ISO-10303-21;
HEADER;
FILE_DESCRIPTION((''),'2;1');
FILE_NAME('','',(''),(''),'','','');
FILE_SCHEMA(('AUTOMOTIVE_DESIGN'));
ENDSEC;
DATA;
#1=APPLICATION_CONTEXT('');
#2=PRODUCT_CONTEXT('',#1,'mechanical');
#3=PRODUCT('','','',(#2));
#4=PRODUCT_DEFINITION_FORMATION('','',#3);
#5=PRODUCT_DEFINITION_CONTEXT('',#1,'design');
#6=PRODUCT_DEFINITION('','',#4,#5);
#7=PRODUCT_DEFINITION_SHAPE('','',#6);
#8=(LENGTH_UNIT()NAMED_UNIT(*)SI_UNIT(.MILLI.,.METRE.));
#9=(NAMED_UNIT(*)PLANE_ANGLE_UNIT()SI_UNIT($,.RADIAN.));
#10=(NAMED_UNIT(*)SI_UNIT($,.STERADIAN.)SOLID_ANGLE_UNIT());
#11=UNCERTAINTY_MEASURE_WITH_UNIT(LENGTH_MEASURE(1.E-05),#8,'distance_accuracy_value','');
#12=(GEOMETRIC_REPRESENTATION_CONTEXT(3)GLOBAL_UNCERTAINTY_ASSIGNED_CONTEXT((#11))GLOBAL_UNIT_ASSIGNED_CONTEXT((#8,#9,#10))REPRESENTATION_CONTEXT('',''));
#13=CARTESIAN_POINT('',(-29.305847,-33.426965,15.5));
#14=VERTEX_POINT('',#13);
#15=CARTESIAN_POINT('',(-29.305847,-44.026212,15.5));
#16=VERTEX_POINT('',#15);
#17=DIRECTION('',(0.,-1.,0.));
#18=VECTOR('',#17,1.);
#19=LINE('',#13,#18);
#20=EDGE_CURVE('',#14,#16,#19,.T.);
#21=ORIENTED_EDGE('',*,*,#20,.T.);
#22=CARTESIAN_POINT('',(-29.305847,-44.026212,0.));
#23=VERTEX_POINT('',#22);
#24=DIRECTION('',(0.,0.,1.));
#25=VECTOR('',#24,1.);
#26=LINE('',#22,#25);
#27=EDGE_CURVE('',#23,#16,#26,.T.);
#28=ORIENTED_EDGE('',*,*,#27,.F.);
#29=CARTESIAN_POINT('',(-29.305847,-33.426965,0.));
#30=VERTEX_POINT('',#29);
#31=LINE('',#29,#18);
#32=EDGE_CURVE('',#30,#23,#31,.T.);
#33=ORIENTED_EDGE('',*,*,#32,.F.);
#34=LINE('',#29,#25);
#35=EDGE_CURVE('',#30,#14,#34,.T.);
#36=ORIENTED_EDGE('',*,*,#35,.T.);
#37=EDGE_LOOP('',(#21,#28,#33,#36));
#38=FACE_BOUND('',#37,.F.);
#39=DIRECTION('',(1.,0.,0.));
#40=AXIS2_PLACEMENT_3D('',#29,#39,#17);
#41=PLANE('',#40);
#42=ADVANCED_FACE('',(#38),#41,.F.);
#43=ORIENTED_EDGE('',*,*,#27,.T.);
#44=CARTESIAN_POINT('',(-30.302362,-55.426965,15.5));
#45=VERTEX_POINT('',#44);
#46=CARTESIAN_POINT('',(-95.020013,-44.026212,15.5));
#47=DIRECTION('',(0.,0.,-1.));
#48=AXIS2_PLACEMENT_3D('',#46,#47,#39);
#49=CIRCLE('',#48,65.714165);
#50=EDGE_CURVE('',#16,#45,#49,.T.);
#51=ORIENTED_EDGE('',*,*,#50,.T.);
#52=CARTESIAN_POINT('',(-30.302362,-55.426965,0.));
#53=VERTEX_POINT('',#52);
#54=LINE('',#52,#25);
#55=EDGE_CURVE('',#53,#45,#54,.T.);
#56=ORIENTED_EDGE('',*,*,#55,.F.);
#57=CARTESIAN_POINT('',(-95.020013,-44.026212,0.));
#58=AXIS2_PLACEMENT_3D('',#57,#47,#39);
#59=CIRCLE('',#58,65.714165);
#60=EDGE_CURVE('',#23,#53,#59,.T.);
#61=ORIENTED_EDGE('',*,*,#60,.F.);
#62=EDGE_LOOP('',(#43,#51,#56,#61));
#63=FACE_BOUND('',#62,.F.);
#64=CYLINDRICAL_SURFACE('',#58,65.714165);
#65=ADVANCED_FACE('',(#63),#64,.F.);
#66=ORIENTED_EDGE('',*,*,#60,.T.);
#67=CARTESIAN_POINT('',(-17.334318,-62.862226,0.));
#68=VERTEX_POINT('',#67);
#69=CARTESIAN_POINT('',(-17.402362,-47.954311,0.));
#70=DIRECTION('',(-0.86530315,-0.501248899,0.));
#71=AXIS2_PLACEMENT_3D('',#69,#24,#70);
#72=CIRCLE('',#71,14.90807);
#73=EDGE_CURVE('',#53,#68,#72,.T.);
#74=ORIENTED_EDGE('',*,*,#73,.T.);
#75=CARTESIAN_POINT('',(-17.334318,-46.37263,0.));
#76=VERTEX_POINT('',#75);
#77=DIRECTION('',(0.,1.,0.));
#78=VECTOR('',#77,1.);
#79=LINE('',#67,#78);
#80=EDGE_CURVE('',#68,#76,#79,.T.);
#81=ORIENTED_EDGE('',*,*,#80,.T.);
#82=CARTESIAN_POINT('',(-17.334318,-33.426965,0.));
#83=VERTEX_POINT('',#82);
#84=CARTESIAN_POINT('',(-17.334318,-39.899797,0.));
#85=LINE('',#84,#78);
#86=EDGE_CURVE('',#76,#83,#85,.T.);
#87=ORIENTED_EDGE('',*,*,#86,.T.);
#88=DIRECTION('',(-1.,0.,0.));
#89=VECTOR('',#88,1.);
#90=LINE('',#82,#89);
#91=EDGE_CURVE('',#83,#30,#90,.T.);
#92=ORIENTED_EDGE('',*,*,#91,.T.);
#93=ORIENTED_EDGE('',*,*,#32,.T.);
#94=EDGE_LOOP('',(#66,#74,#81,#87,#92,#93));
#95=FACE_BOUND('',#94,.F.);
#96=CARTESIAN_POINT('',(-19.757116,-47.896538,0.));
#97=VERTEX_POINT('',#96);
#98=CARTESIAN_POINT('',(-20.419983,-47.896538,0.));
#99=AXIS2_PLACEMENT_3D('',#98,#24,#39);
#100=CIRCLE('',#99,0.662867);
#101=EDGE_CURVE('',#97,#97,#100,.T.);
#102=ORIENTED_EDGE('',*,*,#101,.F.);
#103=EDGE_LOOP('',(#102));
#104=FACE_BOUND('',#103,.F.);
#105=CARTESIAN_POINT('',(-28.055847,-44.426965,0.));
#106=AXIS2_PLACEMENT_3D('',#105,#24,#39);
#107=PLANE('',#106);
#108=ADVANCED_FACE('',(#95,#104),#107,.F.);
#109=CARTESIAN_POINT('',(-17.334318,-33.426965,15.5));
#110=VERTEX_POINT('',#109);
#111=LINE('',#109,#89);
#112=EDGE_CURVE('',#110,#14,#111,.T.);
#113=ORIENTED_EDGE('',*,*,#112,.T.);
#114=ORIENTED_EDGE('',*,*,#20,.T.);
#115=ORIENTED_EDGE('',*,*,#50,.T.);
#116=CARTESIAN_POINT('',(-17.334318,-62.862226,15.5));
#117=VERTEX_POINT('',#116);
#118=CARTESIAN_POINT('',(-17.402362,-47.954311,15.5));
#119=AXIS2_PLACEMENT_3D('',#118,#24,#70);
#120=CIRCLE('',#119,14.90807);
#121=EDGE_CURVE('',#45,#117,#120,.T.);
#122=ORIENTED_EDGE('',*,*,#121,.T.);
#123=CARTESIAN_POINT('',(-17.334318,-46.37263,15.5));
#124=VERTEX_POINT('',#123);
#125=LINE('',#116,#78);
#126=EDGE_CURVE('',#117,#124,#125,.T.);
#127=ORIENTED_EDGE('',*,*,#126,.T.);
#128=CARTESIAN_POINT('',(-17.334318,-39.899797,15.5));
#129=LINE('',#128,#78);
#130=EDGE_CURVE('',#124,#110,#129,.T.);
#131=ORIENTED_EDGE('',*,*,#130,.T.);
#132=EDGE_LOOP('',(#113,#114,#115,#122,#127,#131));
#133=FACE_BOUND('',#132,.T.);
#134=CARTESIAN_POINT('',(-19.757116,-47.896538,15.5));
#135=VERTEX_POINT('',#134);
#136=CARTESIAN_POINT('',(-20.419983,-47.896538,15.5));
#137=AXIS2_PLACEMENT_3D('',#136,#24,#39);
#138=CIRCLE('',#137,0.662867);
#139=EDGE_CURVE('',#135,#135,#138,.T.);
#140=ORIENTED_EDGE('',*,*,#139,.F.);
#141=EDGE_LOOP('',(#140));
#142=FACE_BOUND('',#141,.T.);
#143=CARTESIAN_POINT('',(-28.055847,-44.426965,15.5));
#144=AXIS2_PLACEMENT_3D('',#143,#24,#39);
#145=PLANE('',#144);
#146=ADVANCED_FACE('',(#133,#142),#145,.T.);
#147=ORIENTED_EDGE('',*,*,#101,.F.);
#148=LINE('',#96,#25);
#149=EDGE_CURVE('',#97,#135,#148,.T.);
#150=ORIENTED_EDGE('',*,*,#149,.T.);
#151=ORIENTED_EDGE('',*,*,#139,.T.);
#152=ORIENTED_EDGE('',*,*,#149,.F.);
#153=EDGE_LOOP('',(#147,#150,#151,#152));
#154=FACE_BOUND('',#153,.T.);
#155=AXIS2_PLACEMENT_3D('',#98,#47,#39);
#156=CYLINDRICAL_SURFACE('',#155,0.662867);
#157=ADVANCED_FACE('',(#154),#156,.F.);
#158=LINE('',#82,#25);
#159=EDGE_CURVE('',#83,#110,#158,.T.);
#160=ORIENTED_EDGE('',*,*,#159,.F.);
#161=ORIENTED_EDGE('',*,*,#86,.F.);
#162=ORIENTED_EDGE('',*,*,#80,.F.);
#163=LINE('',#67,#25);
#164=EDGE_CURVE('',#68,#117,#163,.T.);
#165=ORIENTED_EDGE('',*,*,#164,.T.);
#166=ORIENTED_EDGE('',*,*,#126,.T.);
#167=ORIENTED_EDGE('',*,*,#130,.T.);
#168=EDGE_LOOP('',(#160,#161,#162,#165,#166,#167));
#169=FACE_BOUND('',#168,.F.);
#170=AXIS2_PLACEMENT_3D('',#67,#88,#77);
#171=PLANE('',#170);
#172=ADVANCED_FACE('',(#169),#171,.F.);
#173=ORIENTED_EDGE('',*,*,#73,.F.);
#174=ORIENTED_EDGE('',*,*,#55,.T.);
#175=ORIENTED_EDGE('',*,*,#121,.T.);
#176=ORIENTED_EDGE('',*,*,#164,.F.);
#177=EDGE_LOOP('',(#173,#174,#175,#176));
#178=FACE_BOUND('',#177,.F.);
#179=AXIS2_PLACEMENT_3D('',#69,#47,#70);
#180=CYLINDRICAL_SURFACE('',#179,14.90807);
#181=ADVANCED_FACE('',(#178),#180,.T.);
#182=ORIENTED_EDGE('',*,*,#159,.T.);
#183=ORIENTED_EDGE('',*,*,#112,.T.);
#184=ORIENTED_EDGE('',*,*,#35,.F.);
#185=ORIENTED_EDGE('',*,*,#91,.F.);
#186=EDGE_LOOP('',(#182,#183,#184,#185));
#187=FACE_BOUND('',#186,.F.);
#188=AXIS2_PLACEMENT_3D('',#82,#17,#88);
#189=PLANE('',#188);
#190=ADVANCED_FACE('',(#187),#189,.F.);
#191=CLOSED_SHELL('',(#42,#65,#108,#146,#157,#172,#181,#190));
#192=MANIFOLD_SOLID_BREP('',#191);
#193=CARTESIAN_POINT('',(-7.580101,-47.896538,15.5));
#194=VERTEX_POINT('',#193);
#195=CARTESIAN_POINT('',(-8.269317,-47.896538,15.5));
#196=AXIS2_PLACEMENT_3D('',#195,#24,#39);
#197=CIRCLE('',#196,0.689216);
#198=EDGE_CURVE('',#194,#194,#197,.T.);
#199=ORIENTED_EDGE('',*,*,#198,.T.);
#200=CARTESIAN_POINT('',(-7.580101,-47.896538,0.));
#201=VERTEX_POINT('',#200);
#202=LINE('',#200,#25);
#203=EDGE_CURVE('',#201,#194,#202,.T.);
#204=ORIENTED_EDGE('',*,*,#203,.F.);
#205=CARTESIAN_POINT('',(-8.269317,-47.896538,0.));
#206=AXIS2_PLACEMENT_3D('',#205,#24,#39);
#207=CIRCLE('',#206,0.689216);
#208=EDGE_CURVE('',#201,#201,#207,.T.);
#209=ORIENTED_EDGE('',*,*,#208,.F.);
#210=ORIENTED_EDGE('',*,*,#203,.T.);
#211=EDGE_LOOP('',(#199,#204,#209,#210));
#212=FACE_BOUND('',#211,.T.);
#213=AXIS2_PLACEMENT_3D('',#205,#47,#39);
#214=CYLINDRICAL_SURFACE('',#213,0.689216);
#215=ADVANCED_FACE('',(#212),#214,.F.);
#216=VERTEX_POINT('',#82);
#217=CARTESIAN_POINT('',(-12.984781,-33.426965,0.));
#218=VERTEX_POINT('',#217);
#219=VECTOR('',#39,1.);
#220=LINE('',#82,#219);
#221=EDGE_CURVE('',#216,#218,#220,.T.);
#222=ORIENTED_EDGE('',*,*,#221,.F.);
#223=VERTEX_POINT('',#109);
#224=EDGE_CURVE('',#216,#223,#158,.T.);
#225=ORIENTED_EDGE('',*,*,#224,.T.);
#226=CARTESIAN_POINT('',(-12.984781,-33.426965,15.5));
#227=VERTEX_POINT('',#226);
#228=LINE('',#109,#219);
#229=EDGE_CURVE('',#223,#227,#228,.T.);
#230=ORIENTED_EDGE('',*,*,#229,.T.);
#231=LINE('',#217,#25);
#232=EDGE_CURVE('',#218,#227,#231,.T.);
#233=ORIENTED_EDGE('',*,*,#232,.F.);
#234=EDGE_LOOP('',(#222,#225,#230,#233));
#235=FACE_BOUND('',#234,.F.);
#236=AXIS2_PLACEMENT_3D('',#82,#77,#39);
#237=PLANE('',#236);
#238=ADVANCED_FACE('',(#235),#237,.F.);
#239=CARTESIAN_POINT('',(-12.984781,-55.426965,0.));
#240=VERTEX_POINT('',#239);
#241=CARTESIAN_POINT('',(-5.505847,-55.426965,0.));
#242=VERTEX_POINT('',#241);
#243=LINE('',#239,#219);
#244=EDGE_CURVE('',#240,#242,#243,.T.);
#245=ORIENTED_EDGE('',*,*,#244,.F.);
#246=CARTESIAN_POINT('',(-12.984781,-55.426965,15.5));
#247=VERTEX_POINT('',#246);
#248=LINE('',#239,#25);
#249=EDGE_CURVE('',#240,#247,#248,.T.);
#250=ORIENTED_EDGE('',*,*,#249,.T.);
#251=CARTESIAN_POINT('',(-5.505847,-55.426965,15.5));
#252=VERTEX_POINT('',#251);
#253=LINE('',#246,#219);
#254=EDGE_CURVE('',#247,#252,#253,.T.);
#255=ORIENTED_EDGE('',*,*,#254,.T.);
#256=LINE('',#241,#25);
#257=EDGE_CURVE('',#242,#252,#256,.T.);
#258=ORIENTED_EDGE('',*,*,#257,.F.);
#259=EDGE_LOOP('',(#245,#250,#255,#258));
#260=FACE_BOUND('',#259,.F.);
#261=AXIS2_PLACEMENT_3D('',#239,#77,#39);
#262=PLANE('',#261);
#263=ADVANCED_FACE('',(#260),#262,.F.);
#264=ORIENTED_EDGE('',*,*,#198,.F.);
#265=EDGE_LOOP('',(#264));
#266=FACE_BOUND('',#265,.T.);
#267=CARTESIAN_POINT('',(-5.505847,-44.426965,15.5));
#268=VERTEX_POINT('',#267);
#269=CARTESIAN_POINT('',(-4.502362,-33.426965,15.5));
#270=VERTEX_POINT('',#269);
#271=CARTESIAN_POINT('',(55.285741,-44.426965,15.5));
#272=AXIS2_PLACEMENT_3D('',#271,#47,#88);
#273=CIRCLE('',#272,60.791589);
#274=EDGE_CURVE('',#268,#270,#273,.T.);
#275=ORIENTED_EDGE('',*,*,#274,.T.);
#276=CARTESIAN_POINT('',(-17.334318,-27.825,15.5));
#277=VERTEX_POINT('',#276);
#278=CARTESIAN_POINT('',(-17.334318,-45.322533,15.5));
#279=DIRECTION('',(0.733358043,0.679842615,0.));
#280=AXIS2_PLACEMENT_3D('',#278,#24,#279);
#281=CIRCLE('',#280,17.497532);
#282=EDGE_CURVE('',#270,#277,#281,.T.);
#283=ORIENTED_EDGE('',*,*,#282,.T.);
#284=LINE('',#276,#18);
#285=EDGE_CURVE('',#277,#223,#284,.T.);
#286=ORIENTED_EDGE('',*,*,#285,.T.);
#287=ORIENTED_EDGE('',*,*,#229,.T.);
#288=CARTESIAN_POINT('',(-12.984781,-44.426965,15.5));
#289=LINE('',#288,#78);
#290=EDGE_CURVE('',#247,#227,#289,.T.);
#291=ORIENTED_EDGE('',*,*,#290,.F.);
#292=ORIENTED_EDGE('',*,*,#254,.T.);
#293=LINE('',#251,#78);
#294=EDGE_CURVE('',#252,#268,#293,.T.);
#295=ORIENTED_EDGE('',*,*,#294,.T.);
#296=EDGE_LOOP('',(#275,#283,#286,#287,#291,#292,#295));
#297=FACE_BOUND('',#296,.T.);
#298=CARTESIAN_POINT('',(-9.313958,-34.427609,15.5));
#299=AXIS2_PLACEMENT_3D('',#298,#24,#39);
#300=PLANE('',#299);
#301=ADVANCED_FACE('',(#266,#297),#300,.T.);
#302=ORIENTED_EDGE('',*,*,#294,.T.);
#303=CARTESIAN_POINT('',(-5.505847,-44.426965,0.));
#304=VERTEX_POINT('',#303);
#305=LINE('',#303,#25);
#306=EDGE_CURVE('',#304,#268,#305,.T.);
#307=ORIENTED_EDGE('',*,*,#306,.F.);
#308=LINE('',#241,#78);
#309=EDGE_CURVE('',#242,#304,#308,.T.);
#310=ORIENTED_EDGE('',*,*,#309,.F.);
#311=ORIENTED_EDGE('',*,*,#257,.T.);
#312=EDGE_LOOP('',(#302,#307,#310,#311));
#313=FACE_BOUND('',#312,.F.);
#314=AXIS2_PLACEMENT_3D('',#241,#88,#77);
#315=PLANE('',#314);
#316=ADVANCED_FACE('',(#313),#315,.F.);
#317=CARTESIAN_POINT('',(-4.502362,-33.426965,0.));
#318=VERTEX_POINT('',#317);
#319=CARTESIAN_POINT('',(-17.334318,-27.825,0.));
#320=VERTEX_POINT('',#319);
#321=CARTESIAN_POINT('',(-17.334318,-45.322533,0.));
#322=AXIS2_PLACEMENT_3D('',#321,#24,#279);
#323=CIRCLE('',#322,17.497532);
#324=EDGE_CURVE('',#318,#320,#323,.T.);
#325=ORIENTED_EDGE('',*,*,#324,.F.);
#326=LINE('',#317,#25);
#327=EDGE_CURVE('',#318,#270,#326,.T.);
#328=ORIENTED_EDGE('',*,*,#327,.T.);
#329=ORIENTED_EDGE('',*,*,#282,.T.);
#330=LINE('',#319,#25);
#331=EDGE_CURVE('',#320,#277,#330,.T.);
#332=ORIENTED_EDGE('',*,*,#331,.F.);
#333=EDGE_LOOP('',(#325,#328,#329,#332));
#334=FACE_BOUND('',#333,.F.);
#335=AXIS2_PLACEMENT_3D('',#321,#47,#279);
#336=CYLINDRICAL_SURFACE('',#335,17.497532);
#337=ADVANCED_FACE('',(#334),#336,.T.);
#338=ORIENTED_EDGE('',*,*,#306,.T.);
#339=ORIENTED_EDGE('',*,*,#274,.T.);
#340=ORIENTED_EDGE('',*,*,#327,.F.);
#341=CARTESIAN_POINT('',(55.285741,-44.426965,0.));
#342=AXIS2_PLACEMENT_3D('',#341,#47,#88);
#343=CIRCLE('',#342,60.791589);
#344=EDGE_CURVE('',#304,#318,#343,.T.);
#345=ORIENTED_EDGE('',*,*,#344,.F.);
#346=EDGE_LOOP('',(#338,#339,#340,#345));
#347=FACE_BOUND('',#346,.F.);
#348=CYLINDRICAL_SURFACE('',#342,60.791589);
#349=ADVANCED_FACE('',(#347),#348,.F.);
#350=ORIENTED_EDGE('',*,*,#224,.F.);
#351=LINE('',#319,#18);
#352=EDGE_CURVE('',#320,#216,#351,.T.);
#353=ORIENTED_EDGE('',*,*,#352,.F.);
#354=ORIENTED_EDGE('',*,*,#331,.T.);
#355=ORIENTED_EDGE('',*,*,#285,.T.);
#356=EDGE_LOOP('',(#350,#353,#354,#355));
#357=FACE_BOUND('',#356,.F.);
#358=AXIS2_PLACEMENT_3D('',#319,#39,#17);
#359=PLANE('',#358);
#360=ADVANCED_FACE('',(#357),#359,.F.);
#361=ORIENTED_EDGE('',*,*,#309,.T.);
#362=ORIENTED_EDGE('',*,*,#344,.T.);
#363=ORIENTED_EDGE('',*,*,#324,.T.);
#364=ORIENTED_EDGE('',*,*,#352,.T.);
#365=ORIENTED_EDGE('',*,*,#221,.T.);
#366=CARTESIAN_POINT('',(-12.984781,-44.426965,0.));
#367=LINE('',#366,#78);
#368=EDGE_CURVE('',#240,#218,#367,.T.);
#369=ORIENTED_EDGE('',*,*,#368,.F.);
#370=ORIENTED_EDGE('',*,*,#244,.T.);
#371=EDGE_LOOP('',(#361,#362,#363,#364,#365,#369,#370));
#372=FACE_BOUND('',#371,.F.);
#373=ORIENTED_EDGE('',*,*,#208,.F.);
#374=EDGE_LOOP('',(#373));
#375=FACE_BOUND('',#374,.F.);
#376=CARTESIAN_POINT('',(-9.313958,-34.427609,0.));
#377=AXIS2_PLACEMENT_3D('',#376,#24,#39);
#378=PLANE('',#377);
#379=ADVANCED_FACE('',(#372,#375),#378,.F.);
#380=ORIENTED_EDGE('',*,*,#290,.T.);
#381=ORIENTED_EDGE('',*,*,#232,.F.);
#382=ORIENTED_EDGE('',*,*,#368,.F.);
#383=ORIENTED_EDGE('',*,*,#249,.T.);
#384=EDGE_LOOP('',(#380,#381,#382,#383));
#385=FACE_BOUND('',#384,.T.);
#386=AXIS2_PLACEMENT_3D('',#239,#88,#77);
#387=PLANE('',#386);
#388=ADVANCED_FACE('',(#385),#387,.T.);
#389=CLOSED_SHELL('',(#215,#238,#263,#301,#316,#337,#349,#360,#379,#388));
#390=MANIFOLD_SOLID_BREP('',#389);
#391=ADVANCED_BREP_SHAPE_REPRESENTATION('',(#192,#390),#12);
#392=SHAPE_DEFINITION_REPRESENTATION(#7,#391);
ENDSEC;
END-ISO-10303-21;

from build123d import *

# Parameters (mm, degrees)
F0_W     = 8.3915624609
F0_H     = 22
F0_R     = 0.6628669698
F0_W_2   = 0.0715297889
F0_H_2   = 12.9456651346
F1_DEPTH = 15.5
F0_W_3   = 5.9789330999
F0_R_2   = 0.68921597


with BuildPart() as f1:
    # F0 (on Top) → F1 (new body)
    with BuildSketch(Plane.XY):
        Polygon((-26.8058474948, -33.4269645675), (-29.3058474948, -33.4269645675), (-29.3058474948, -44.0262116721), (-29.3058474948, -55.4269645675), (-26.8058474948, -55.4269645675), align=None)
        with Locations((-22.6100662644, -44.4269645675)):
            Rectangle(F0_W, F0_H)
        with Locations((-20.4199831933, -47.8965379298)):
            Circle(F0_R, mode=Mode.SUBTRACT)
        with BuildLine():
            Line((-29.3058474948, -55.4269645675), (-29.3058474948, -44.0262116721))
            ThreePointArc((-29.3058474948, -44.0262116721), (-29.5554500968, -49.7483224557), (-30.3023617679, -55.4269645675))
            ThreePointArc((-30.3023617679, -55.4269645675), (-24.8175859802, -60.8874080585), (-17.334317706, -62.8622256441))
            Line((-17.334317706, -62.8622256441), (-17.334317706, -55.4269645675))
            Line((-17.334317706, -55.4269645675), (-18.4142850339, -55.4269645675))
            Line((-18.4142850339, -55.4269645675), (-26.8058474948, -55.4269645675))
            Line((-26.8058474948, -55.4269645675), (-29.3058474948, -55.4269645675))
        make_face()
        Polygon((-17.4058474948, -33.4269645675), (-18.4142850339, -33.4269645675), (-18.4142850339, -55.4269645675), (-17.334317706, -55.4269645675), (-17.334317706, -46.3726297021), (-17.4058474948, -46.3726297021), align=None)
        with Locations((-17.3700826004, -39.8997971348)):
            Rectangle(F0_W_2, F0_H_2)
    extrude(amount=F1_DEPTH)


with BuildPart() as f1b:
    # F0 (on Top) → F1, piece 2 (new body)
    with BuildSketch(Plane.XY):
        with BuildLine():
            ThreePointArc((-4.5023617679, -33.4269645675), (-10.3335838979, -29.2865306602), (-17.334317706, -27.8250004287))
            Line((-17.334317706, -27.8250004287), (-17.334317706, -33.4269645675))
            Line((-17.334317706, -33.4269645675), (-12.9847805947, -33.4269645675))
            Line((-12.9847805947, -33.4269645675), (-7.0058474948, -33.4269645675))
            Line((-7.0058474948, -33.4269645675), (-5.5058474948, -33.4269645675))
            Line((-5.5058474948, -33.4269645675), (-5.5058474948, -44.4269645675))
            ThreePointArc((-5.5058474948, -44.4269645675), (-5.2544562745, -38.9041259948), (-4.5023617679, -33.4269645675))
        make_face()
        with Locations((-9.9953140448, -44.4269645675)):
            Rectangle(F0_W_3, F0_H)
        with Locations((-8.2693165168, -47.8965379298)):
            Circle(F0_R_2, mode=Mode.SUBTRACT)
        Polygon((-5.5058474948, -55.4269645675), (-5.5058474948, -44.4269645675), (-5.5058474948, -33.4269645675), (-7.0058474948, -33.4269645675), (-7.0058474948, -55.4269645675), align=None)
    extrude(amount=F1_DEPTH)


solid = Compound([f1.part, f1b.part])
